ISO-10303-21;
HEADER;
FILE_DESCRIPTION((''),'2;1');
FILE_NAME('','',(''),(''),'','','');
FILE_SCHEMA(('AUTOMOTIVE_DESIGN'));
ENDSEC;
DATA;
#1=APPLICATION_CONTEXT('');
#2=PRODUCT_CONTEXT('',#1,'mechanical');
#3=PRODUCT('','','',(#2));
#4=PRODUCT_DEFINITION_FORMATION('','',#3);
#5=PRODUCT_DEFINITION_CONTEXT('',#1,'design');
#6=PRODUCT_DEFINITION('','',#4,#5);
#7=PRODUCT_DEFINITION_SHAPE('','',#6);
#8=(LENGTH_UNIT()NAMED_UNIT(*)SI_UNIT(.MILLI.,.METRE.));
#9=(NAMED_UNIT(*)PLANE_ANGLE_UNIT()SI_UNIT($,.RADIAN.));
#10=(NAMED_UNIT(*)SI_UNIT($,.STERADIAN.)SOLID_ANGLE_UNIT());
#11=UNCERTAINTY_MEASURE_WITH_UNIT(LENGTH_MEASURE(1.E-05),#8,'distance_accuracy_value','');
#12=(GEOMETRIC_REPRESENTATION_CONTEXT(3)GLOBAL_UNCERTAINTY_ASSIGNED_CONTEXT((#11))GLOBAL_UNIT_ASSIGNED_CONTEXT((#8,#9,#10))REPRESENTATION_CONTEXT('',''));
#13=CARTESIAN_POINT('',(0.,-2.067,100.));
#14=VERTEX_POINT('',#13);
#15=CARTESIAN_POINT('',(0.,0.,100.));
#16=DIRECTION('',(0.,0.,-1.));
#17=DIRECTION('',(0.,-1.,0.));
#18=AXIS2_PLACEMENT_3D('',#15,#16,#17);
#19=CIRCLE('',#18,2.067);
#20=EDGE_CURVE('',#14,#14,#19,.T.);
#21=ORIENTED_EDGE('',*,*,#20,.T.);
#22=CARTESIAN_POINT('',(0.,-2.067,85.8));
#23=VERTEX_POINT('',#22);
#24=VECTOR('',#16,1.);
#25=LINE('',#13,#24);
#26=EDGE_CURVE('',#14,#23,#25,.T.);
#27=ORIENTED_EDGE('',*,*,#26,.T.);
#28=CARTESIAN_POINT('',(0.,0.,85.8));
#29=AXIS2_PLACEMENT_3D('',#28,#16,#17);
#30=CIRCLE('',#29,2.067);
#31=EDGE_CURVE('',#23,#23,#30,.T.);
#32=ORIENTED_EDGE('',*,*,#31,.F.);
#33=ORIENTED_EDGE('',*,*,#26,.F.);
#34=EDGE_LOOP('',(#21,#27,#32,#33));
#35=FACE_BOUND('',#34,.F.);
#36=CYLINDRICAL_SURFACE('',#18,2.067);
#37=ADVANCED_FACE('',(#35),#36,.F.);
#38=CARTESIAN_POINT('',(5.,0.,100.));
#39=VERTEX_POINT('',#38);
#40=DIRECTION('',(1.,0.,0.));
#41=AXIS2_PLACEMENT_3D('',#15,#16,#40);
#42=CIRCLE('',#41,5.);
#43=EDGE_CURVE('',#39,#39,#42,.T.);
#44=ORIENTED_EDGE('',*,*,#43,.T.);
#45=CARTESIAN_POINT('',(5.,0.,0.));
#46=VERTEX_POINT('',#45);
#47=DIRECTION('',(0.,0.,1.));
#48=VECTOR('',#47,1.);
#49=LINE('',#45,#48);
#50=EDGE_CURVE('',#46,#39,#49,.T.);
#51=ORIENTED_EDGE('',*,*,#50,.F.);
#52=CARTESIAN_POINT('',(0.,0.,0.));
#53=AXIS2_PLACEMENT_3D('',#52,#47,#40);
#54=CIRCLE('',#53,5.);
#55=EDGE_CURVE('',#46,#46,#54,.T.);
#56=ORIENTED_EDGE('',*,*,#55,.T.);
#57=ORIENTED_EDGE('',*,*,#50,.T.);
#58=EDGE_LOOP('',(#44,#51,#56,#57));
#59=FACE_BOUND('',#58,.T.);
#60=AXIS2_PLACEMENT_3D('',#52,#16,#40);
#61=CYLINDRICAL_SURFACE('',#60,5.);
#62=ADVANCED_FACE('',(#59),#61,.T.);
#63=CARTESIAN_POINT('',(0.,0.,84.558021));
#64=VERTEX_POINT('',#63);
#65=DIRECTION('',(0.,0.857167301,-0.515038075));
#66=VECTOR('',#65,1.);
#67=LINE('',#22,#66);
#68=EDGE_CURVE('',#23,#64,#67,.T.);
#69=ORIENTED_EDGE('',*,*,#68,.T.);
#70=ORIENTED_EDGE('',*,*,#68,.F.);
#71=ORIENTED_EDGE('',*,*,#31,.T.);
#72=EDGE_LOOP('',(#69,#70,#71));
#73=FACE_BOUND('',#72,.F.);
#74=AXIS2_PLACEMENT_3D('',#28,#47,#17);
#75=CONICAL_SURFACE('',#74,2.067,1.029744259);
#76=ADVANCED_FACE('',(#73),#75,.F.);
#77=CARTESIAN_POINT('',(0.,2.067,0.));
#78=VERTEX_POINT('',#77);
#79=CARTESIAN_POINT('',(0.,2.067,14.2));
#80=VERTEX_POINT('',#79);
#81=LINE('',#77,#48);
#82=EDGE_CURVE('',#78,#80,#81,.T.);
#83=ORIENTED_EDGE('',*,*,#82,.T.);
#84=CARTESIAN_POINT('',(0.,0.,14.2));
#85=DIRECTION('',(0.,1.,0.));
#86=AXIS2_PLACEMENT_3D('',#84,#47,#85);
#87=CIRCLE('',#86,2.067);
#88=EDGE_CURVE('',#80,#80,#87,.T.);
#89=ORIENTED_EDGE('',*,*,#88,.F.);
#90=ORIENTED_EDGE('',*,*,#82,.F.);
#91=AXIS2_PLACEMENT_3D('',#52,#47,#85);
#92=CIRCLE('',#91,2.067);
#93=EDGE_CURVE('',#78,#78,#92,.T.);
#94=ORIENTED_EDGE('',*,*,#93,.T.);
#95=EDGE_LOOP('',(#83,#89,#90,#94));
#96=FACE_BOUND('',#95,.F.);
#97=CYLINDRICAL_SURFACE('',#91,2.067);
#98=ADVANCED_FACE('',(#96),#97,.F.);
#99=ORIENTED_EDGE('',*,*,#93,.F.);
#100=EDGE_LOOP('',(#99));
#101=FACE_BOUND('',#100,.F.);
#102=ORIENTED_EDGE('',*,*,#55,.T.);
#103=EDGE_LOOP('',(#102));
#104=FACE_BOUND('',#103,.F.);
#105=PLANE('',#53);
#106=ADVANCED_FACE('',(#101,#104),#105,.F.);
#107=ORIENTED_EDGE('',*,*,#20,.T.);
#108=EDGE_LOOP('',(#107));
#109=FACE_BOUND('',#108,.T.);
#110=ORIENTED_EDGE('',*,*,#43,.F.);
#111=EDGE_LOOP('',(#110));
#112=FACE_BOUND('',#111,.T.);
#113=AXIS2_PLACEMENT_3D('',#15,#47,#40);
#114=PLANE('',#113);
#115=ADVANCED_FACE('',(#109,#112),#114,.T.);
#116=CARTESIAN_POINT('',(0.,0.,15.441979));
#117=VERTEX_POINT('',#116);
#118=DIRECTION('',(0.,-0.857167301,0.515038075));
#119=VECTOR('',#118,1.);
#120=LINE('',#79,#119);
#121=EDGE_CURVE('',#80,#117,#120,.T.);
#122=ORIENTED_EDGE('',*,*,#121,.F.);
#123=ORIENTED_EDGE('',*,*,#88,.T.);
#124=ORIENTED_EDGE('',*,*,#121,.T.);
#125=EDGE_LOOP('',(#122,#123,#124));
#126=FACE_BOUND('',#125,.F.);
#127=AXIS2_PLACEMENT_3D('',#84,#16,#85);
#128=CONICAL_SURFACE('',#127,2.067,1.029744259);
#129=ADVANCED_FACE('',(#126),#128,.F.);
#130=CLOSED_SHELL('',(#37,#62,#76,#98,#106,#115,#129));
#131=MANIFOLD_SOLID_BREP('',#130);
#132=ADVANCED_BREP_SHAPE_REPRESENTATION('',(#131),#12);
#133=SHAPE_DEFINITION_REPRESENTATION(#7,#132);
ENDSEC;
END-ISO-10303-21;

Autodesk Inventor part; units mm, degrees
ref_plane "YZ Plane" through (0, 0, 0) normal (1, 0, 0) x (0, 1, 0)
ref_plane "XZ Plane" through (0, 0, 0) normal (0, 1, 0) x (-1, 0, 0)
ref_plane "XY Plane" through (0, 0, 0) normal (0, 0, 1) x (1, 0, 0)
sketch "Skizze1" plane through (0, 0, 0) normal (0, 0, 1) x (1, 0, 0)
  line L0 (-7, 0) -> (7, 0) projected
  line L1 (0, -7) -> (0, 7) projected
  circle A0 centre (0, 0) radius 5
  dimension "d0" = 10
extrude "Extrusion1" add sketch "Skizze1" along normal blind 100
sketch "Skizze2" plane through (0, 0, 100) normal (0, 0, 1) x (1, 0, 0)
  point P0 (0, 0)
  point P1 (0, 0)
hole "Bohrung1" at (0, 0, 100) direction (0, 0, -1) diameter 4.134 depth 14.2 tip angle 118 thread size "M5x0.8" class "6H" standard "ISO Metric profile"
sketch "Skizze3" plane through (0, 0, 0) normal (0, 0, -1) x (-1, 0, 0)
  point P0 (0, 0)
  point P1 (-2.4827, -3.6773)
hole "Bohrung2" at (0, 0, 0) direction (0, 0, 1) diameter 4.134 depth 14.2 tip angle 118 thread size "M5x0.8" class "6H" standard "ISO Metric profile"
properties part number "24_0497_0014"
